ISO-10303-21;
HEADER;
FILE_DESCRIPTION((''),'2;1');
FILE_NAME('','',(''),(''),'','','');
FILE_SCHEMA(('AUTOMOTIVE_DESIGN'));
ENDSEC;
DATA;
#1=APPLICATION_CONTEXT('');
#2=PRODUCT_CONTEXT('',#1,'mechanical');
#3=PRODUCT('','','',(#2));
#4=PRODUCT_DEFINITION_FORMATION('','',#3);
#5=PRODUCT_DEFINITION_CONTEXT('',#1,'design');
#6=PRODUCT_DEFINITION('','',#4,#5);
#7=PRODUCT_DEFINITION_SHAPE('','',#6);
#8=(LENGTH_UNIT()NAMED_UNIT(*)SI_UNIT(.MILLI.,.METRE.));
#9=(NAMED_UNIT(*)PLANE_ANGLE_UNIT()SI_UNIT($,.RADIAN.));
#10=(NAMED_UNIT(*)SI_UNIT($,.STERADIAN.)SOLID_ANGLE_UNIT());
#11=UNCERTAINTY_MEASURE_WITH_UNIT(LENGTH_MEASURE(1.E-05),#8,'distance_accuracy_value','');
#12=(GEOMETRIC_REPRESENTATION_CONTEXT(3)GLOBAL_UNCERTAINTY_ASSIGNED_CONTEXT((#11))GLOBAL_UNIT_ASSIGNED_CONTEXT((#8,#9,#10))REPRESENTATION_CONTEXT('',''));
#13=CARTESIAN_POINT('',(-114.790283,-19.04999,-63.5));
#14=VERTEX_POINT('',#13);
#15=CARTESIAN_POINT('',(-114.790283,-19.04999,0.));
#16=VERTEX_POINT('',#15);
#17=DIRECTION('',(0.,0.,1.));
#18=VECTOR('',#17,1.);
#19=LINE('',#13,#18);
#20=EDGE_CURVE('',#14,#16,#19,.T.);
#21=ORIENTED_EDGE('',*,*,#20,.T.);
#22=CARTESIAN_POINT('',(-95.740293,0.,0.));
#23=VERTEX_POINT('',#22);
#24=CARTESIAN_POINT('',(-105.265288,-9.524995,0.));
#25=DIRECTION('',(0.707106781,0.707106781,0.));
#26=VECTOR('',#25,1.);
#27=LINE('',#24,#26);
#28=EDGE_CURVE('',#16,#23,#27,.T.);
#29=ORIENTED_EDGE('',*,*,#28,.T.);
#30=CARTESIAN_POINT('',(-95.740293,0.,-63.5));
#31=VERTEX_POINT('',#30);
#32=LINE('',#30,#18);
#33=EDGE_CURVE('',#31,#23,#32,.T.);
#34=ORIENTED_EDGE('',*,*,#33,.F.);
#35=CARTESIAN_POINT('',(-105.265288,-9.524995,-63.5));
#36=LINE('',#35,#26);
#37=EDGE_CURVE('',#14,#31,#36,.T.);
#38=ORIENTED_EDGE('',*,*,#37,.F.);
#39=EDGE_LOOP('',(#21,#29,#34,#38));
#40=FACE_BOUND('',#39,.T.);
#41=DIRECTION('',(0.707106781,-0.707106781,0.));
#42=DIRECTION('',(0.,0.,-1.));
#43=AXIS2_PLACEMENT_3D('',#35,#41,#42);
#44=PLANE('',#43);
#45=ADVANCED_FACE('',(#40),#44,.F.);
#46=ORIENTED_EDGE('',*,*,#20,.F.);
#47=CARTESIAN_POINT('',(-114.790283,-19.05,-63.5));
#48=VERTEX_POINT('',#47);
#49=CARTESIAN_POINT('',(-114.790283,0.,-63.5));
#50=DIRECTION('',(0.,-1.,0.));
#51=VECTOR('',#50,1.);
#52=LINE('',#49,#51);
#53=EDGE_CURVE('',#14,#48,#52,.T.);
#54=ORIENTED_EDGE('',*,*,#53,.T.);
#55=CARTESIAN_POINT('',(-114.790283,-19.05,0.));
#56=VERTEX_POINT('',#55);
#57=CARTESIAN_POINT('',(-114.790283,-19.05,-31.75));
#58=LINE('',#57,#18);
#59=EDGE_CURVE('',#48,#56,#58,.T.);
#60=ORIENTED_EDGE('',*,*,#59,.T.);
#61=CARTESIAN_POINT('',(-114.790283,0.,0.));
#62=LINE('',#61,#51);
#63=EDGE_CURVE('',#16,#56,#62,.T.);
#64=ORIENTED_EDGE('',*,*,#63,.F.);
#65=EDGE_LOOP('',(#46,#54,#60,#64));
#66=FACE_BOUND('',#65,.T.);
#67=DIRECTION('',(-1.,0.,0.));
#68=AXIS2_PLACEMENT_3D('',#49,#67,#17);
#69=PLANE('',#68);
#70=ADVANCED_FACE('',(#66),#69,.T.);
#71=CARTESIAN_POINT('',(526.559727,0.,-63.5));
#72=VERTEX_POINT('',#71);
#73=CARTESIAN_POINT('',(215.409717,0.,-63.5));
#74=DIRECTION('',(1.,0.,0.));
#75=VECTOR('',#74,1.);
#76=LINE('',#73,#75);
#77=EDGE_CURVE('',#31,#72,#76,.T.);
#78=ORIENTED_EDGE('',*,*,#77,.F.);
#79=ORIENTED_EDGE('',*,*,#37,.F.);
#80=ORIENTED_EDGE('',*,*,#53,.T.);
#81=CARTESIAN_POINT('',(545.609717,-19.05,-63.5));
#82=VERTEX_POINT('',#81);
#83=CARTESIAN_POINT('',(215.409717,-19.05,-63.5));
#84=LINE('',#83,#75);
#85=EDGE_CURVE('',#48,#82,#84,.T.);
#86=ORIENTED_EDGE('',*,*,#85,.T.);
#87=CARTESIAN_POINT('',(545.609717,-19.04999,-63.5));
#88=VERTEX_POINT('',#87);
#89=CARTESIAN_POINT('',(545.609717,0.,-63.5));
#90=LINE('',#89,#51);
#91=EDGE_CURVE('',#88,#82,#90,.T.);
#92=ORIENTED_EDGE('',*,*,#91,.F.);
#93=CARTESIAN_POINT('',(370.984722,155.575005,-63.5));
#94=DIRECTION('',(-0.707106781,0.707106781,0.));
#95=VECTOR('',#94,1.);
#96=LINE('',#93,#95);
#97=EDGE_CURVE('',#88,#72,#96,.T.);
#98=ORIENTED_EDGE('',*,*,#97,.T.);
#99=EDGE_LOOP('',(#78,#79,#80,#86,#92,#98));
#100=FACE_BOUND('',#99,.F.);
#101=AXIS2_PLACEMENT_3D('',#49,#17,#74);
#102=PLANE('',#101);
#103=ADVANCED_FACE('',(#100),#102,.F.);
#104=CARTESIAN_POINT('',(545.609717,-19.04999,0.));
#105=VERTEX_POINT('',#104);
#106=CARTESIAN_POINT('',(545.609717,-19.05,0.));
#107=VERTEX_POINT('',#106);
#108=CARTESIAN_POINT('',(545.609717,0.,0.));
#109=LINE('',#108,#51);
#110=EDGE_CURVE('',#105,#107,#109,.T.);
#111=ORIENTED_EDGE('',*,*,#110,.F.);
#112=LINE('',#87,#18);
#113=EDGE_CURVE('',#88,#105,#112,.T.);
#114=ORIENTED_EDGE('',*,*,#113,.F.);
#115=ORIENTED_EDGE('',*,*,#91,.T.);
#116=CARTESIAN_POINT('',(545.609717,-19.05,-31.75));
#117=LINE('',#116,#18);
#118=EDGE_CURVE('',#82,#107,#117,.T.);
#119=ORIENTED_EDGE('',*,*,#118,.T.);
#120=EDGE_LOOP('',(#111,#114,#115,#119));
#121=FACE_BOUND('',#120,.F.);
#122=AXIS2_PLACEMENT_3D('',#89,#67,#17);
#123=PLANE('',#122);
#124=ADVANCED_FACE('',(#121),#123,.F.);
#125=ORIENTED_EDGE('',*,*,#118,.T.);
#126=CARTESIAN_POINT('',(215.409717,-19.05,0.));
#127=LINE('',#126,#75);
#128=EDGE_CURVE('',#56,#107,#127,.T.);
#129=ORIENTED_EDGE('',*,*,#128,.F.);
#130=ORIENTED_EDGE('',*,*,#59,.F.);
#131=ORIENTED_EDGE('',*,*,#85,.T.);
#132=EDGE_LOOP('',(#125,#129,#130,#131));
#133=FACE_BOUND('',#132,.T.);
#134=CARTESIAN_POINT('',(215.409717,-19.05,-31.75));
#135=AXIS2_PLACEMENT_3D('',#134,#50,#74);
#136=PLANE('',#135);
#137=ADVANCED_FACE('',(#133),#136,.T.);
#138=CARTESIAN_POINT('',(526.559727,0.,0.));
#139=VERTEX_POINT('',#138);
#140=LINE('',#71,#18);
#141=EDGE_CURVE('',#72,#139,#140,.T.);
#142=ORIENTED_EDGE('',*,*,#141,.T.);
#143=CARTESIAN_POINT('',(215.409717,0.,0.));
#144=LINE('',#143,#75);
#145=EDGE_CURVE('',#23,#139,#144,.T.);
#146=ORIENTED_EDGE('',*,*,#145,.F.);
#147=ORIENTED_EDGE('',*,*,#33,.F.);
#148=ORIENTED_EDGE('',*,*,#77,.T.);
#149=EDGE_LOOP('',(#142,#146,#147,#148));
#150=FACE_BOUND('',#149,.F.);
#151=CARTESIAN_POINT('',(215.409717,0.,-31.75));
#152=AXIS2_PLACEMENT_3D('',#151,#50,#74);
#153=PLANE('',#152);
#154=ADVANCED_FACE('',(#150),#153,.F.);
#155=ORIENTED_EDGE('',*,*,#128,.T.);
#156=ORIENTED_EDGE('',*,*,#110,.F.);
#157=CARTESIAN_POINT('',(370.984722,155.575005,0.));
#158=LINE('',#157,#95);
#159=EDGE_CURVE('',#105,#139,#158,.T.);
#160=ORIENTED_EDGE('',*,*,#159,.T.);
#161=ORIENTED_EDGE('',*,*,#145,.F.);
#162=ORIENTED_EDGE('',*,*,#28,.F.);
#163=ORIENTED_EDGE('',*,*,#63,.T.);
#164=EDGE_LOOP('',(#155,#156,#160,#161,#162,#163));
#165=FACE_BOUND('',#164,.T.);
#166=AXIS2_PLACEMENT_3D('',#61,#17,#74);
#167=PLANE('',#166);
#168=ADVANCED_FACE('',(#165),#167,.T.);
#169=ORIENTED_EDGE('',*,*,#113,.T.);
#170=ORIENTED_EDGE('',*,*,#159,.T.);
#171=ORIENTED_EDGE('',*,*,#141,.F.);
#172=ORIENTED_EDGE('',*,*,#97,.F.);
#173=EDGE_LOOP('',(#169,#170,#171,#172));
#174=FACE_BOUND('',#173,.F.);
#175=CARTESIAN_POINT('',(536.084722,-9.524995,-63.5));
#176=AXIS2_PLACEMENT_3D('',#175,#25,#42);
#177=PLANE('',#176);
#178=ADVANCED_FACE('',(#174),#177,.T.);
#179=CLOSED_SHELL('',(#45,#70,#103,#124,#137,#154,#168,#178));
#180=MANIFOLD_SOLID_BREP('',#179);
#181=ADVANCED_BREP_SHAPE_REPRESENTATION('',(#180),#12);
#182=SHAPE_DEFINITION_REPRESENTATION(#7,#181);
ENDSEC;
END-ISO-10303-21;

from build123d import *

# Parameters (mm, degrees)
F0_W     = 660.4
F0_H     = 63.5
F1_DEPTH = 19.05
F2_SIZE  = 19.04999


# Not quite as in the source:
# - a fillet or chamfer is up to 0.001 mm smaller than in the source, because OpenCascade refuses the exact size


with BuildPart() as f1:
    # F0 (on Front) → F1 (new body)
    with BuildSketch(Plane.XZ):
        with Locations((215.4097168565, -31.75)):
            Rectangle(F0_W, F0_H)
    extrude(amount=F1_DEPTH)

    # F2 (size 19.05 in the source; OpenCascade refuses exactly that, so slightly less here)
    f2_edges = [f1.edges().sort_by_distance(p)[0] for p in [
        (-114.790283, 0, -31.75),
        (545.609717, 0, -31.75),
    ]]
    chamfer(f2_edges, length=F2_SIZE)


solid = f1.part
